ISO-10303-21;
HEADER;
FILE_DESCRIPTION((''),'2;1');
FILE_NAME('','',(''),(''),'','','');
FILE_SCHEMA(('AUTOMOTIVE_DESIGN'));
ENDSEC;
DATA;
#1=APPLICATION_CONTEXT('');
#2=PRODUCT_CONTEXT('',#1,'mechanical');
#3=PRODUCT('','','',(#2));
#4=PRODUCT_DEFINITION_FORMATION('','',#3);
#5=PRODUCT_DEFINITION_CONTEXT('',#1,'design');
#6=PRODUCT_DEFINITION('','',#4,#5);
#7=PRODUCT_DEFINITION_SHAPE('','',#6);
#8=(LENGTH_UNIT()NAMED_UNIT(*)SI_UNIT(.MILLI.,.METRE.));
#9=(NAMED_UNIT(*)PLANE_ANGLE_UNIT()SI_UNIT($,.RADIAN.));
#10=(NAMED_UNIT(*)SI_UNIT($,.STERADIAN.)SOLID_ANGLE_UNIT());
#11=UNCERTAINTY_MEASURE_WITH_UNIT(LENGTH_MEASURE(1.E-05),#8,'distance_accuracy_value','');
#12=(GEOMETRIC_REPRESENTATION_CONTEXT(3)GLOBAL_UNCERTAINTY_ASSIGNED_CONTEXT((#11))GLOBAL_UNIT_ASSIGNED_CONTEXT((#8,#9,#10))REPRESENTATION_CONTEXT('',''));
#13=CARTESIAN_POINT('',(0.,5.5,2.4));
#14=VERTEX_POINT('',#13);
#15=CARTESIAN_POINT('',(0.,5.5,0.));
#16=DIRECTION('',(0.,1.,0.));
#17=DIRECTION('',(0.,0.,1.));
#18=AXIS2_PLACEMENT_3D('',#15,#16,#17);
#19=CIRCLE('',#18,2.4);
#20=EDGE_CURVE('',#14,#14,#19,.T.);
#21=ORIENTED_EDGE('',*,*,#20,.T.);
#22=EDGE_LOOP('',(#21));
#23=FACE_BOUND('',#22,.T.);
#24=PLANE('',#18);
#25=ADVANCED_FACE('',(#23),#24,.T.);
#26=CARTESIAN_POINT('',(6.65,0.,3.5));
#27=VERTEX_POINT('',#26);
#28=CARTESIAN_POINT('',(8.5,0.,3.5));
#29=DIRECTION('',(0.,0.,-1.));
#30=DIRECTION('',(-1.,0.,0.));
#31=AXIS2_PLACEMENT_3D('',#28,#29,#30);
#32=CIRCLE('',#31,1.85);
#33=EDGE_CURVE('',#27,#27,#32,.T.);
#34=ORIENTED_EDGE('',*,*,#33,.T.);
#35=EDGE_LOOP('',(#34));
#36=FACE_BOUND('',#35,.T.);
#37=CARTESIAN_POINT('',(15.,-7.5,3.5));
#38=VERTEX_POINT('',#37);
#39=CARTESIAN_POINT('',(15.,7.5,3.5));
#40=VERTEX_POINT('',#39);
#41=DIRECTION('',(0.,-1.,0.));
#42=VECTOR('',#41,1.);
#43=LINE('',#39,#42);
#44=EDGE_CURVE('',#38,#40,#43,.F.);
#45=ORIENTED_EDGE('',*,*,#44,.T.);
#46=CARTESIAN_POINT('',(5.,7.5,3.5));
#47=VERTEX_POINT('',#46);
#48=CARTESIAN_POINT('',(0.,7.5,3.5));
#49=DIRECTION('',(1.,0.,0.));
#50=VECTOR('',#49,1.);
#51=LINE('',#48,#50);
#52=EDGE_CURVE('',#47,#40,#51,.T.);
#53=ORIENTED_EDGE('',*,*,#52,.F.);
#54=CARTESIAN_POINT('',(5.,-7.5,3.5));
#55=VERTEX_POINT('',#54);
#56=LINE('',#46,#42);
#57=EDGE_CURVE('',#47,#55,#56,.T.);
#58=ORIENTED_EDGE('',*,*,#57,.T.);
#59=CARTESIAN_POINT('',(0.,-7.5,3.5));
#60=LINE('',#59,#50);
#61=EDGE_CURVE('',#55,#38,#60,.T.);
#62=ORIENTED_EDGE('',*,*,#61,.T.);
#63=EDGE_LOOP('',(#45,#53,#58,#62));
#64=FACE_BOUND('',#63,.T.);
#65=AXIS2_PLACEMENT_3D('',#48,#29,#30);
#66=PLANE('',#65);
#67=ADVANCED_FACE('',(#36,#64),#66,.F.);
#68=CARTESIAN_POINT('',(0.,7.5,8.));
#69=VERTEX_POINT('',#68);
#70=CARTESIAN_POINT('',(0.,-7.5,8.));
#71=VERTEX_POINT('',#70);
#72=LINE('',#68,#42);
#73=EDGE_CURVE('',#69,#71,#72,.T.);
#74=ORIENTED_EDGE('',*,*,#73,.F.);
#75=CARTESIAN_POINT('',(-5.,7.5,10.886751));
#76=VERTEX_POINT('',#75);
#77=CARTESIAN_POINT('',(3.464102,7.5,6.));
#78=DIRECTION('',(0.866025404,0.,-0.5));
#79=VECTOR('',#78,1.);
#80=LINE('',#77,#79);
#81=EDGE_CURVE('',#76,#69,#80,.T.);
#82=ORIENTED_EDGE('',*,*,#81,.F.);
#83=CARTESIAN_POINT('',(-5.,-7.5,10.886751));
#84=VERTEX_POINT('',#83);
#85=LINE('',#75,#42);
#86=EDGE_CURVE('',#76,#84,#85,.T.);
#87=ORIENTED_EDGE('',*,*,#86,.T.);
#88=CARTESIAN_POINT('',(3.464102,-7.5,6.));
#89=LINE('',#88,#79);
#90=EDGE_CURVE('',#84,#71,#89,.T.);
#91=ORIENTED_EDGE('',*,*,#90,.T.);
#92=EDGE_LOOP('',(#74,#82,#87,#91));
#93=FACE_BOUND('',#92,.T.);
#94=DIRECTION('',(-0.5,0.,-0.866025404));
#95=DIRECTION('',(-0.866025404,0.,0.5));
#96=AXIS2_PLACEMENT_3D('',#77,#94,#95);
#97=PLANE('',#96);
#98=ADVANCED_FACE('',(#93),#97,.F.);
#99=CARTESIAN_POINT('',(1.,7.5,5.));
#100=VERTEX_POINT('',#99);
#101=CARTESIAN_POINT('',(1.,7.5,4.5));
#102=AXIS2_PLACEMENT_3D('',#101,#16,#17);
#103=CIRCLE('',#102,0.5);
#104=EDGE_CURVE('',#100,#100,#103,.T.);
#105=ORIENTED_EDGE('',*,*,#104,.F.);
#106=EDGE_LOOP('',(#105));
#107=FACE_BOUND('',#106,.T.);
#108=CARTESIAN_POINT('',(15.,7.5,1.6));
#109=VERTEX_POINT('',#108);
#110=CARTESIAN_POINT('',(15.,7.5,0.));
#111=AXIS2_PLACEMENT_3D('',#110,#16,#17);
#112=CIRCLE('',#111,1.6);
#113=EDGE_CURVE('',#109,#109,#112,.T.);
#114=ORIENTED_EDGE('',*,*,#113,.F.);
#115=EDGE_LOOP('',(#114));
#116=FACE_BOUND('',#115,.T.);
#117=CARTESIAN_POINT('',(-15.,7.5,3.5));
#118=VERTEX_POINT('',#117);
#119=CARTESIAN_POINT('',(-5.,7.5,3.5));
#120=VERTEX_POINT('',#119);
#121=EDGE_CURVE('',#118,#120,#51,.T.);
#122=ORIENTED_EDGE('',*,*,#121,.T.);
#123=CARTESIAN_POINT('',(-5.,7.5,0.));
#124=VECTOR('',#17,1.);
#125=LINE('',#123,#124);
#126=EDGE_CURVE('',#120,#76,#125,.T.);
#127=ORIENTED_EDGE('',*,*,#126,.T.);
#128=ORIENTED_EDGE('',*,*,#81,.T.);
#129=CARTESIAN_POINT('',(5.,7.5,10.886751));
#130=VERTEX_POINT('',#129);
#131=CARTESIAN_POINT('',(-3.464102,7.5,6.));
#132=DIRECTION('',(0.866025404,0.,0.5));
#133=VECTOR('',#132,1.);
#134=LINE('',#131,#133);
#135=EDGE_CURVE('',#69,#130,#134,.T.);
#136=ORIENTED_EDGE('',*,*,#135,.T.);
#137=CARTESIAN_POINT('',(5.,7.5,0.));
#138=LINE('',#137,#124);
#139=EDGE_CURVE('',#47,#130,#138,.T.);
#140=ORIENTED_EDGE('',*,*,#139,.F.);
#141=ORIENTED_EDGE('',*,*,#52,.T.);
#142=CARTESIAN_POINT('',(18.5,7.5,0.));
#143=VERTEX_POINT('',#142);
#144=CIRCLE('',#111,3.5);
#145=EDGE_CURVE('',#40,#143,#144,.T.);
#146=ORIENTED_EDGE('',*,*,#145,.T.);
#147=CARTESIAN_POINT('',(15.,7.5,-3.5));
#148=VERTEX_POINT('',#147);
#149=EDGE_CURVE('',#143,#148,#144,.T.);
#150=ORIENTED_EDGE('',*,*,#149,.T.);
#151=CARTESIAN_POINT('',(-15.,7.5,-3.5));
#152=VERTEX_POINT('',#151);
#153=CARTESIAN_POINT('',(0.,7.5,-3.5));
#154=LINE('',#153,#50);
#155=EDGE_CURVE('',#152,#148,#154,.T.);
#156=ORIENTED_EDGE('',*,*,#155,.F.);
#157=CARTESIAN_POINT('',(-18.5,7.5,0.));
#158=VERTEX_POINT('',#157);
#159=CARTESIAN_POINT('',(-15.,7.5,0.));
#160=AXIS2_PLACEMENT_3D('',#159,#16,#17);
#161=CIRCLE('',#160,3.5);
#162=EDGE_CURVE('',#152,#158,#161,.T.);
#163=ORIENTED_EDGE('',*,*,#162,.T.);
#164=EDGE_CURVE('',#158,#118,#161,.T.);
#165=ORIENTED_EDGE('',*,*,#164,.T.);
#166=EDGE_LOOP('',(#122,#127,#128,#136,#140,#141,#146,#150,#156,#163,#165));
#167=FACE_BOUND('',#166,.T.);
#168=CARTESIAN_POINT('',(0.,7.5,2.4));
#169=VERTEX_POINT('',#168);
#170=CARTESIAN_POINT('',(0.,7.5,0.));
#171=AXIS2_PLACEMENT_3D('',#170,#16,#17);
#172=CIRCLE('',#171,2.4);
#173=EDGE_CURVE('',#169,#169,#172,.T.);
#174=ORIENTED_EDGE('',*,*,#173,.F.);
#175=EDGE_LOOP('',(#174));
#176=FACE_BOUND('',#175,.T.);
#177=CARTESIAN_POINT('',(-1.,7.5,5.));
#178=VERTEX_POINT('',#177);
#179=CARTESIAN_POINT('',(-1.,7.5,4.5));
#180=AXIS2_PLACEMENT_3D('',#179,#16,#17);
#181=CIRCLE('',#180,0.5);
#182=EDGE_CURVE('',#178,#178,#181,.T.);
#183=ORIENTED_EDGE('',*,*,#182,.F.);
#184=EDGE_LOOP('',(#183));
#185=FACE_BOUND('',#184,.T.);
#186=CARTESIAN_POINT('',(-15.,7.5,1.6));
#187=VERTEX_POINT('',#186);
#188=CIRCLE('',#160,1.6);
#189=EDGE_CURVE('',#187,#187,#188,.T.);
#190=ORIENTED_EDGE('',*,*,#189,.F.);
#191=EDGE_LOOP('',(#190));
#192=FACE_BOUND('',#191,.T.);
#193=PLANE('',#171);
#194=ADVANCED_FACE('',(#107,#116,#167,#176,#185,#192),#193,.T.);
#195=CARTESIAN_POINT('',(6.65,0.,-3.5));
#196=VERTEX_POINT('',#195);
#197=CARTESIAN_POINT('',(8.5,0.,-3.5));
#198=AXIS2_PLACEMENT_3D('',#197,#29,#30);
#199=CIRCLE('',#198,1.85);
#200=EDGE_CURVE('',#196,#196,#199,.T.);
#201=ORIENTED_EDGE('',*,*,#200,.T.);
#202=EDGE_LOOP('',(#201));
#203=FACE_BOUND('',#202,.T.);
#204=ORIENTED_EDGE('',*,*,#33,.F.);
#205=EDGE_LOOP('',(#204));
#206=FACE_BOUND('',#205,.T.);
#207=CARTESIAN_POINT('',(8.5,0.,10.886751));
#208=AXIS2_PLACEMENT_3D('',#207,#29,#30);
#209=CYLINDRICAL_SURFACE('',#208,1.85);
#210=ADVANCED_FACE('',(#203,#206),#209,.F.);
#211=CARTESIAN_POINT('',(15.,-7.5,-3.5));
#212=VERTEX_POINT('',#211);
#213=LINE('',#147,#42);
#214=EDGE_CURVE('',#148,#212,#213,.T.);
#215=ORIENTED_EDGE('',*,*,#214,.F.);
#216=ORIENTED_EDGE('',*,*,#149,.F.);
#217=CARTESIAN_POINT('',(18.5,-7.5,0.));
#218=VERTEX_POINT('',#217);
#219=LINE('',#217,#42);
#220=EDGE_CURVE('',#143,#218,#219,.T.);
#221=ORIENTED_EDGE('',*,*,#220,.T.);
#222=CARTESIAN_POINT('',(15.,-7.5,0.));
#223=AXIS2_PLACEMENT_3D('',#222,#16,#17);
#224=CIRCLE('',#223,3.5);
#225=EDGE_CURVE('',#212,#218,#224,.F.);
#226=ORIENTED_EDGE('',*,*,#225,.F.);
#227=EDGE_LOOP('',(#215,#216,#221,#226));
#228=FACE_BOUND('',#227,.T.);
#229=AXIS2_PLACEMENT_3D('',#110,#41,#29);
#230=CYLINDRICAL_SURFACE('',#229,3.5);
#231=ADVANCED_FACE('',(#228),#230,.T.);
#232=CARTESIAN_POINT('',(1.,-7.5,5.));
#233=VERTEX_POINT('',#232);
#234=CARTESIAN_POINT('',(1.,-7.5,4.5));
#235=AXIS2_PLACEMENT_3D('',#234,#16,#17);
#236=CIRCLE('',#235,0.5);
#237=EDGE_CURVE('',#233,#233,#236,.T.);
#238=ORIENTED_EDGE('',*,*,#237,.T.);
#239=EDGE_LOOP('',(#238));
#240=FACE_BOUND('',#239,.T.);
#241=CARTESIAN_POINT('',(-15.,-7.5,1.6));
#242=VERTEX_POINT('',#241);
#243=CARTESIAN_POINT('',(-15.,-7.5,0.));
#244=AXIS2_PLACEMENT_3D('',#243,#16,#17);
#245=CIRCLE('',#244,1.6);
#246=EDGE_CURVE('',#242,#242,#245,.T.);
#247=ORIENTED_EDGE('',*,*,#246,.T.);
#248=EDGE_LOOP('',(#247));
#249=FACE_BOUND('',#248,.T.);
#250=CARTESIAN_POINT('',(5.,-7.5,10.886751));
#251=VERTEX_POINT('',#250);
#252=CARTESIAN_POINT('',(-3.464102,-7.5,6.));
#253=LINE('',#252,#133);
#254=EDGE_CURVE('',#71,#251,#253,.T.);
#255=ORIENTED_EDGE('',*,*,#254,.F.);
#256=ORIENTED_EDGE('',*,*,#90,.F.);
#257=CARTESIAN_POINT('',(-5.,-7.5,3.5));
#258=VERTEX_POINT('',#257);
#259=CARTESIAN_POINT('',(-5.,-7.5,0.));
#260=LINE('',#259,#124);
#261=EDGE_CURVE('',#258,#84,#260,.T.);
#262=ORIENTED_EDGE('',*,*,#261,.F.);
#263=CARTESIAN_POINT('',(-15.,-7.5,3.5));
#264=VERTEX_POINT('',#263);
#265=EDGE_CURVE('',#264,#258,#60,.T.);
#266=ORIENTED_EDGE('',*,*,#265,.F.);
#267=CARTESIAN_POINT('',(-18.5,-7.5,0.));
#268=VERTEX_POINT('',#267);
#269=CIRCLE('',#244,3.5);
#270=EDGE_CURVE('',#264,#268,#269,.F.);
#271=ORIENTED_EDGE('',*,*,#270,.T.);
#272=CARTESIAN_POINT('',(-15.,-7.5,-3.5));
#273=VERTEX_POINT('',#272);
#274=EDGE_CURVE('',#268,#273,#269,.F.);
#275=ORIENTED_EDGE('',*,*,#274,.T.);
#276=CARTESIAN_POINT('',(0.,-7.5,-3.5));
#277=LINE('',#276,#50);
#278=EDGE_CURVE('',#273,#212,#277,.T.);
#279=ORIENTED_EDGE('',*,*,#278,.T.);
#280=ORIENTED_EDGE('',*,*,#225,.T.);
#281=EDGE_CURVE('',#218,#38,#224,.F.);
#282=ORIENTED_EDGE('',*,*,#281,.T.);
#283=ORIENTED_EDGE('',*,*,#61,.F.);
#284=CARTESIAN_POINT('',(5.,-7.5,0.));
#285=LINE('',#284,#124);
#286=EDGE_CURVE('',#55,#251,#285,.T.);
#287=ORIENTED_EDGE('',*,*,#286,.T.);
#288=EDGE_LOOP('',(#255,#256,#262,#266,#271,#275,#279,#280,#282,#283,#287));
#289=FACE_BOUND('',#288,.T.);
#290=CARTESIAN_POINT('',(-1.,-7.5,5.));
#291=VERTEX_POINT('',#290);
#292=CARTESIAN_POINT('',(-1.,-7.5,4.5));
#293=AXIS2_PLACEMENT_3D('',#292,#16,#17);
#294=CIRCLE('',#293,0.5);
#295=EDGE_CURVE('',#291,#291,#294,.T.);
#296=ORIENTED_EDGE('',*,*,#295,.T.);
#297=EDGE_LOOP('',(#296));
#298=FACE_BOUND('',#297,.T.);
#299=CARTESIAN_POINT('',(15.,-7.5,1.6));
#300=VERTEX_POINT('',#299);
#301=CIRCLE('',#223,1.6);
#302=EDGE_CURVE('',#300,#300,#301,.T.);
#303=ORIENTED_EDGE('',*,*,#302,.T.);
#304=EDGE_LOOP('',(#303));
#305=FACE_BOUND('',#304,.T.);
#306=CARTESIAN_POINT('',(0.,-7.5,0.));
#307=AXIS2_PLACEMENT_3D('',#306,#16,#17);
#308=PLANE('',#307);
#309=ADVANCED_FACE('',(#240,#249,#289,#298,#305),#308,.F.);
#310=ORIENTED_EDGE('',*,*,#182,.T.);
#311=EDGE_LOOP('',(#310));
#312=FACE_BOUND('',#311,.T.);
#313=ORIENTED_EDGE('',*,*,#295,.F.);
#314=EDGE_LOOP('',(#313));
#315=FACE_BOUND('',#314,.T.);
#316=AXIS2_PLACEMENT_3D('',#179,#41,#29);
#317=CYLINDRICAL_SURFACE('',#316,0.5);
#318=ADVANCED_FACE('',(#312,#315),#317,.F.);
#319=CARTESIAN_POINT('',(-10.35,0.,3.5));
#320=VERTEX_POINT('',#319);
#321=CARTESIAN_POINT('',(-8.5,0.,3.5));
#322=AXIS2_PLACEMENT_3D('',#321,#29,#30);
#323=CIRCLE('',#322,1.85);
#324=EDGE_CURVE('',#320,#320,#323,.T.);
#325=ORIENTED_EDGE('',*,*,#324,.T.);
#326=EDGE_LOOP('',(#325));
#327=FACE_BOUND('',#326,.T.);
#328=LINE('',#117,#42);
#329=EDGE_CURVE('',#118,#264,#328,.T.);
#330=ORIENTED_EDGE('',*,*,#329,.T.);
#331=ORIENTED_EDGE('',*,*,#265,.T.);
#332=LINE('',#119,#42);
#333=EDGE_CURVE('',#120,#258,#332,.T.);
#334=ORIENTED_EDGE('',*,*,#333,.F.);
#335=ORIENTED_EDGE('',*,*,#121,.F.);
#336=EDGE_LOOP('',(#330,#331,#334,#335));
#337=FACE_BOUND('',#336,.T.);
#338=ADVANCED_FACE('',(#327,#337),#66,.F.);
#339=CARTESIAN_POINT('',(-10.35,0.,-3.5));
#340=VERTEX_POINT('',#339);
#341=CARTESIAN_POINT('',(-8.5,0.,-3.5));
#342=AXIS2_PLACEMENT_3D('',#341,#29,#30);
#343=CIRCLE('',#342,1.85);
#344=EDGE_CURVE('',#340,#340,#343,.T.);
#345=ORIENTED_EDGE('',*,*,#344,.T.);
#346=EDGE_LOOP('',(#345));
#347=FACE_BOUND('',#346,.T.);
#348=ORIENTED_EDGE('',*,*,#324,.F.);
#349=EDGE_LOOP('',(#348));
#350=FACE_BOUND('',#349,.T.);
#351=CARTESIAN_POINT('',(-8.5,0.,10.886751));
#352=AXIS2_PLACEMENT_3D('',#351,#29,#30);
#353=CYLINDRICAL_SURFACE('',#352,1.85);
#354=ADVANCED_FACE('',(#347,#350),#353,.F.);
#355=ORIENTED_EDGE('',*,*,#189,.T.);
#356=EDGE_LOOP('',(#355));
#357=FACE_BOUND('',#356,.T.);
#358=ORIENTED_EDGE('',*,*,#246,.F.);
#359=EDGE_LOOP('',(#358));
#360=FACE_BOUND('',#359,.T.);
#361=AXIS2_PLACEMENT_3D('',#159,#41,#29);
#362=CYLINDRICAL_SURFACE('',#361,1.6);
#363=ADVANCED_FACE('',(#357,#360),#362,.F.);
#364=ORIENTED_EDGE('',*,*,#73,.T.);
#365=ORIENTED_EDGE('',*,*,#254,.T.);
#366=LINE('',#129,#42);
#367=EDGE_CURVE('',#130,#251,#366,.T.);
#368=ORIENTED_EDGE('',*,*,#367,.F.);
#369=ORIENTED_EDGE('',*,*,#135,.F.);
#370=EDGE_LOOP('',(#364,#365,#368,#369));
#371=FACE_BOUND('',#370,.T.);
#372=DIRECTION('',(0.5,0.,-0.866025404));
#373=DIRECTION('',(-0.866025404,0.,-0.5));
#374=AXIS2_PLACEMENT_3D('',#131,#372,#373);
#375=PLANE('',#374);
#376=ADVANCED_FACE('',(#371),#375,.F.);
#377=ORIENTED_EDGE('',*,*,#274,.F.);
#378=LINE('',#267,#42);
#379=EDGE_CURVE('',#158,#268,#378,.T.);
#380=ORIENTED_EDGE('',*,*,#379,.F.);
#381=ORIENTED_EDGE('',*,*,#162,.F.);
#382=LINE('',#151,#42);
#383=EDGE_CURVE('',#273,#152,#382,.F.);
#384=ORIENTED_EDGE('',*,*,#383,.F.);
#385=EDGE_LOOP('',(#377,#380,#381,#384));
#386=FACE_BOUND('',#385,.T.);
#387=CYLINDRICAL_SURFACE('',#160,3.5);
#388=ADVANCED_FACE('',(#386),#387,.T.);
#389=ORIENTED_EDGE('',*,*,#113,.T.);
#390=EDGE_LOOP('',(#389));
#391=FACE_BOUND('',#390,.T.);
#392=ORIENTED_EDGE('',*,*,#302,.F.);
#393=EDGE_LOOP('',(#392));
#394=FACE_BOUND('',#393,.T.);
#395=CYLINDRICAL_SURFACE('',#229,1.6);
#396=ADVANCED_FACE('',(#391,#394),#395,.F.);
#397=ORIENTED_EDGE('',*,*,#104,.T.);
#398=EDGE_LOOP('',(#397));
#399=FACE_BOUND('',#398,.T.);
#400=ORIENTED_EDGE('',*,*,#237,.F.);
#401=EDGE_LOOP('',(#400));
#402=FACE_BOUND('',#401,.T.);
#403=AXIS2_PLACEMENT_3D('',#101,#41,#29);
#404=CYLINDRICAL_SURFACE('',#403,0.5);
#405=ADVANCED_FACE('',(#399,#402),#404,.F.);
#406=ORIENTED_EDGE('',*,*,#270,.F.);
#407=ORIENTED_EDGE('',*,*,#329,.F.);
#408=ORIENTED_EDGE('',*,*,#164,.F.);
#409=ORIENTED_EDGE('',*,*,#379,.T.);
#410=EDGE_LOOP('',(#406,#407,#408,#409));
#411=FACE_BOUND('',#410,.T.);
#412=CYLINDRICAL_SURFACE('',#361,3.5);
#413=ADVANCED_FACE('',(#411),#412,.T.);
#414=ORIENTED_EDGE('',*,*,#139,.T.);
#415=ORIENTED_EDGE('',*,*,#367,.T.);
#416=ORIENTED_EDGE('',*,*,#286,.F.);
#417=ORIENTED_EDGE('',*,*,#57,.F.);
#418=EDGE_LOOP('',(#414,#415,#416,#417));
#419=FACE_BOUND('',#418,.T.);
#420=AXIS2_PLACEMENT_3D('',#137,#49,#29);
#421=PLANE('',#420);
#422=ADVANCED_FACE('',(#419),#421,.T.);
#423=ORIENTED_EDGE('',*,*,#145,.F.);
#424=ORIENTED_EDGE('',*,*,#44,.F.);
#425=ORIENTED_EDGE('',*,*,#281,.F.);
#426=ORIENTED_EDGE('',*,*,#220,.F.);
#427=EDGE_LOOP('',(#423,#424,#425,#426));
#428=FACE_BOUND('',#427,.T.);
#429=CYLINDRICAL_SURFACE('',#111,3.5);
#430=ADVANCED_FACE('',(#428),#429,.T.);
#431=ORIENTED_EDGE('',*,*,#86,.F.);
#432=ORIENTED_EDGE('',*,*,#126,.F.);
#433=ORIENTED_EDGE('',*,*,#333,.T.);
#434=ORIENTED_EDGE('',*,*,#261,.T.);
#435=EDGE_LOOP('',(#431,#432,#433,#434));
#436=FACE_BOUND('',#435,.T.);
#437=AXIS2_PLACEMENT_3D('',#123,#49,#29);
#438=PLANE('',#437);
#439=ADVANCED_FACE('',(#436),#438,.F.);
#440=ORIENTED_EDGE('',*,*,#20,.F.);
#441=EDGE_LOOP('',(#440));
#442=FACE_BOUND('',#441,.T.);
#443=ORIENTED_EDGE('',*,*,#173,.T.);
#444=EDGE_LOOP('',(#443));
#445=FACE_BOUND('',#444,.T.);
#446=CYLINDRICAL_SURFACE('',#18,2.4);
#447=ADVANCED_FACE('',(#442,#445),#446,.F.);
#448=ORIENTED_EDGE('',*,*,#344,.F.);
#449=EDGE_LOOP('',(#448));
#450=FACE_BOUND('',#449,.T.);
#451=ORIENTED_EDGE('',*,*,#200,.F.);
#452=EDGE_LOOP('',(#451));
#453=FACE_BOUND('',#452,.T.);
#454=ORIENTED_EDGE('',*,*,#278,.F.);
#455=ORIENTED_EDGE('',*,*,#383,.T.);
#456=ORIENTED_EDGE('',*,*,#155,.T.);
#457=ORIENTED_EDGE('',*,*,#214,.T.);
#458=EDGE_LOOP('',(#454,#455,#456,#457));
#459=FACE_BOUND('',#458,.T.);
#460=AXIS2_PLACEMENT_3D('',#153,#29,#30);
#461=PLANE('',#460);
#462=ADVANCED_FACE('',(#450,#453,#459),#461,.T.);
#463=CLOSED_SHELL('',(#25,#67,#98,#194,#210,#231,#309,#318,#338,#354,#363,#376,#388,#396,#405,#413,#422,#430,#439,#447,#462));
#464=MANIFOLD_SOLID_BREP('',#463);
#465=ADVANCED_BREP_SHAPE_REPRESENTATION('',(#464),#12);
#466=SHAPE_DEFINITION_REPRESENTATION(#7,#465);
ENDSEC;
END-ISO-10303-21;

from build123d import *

# Parameters (mm, degrees)
SKIZZE1_W                       = 37
SKIZZE1_H                       = 7
SKIZZE1_R                       = 2.4
SKIZZE1_R_2                     = 1.6
SKIZZE1_R_3                     = 0.5
AUFSATZ_LINEAR_AUSTRAGEN1_DEPTH = 7.5
VERRUNDUNG1_R                   = 3.5
SKIZZE2_R                       = 1.85
SCHNITT_LINEAR_AUSTRAGEN1_DEPTH = 25.606475048
SKIZZE3_R                       = 2.4
SCHNITT_LINEAR_AUSTRAGEN2_DEPTH = 2


with BuildPart() as part:
    # Skizze1 → Aufsatz-Linear austragen1 (new, symmetric)
    # profile 1 of 3: a face of its own
    with BuildSketch(Plane(origin=(0, 0, 0), x_dir=(1, 0, 0), z_dir=(0, 1, 0))):
        Rectangle(SKIZZE1_W, SKIZZE1_H)
        Circle(SKIZZE1_R, mode=Mode.SUBTRACT)
        with Locations(Location((15, 0, 0), (0, 0, 270))):
            Circle(SKIZZE1_R_2, mode=Mode.SUBTRACT)
        with Locations(Location((-15, 0, 0), (0, 0, 270))):
            Circle(SKIZZE1_R_2, mode=Mode.SUBTRACT)
    # profile 2 of 3: a face of its own
    with BuildSketch(Plane(origin=(0, 0, 0), x_dir=(1, 0, 0), z_dir=(0, 1, 0))):
        Circle(SKIZZE1_R)
    # profile 3 of 3: a face of its own
    with BuildSketch(Plane(origin=(0, 0, 0), x_dir=(1, 0, 0), z_dir=(0, 1, 0))):
        Polygon((5, -3.5), (-5, -3.5), (-5, -10.886751346), (0, -8), (5, -10.886751346), align=None)
        with Locations(Location((-1, -4.5, 0), (0, 0, 270))):
            Circle(SKIZZE1_R_3, mode=Mode.SUBTRACT)
        with Locations(Location((1, -4.5, 0), (0, 0, 270))):
            Circle(SKIZZE1_R_3, mode=Mode.SUBTRACT)
    extrude(amount=AUFSATZ_LINEAR_AUSTRAGEN1_DEPTH, both=True)

    # Verrundung1
    verrundung1_edges = [part.edges().sort_by_distance(p)[0] for p in [
        (-18.5, 0, 3.5),
        (-18.5, 0, -3.5),
        (18.5, 0, -3.5),
        (18.5, 0, 3.5),
    ]]
    fillet(verrundung1_edges, radius=VERRUNDUNG1_R - 0.0001)  # a hair under: the kernel refuses the full size

    # Skizze2 → Schnitt-Linear austragen1 (cut, through all)
    with BuildSketch(Plane(origin=(0, 0, -3.5), x_dir=(-1, 0, 0), z_dir=(0, 0, -1))):
        with Locations((-8.5, 0)):
            Circle(SKIZZE2_R)
        with Locations((8.5, 0)):
            Circle(SKIZZE2_R)
    extrude(amount=-SCHNITT_LINEAR_AUSTRAGEN1_DEPTH, mode=Mode.SUBTRACT)

    # Skizze3 → Schnitt-Linear austragen2 (cut)
    with BuildSketch(Plane(origin=(0, 7.5, 0), x_dir=(1, 0, 0), z_dir=(0, 1, 0))):
        with Locations(Location((0, 0, 0), (0, 0, 270))):
            Circle(SKIZZE3_R)
    extrude(amount=-SCHNITT_LINEAR_AUSTRAGEN2_DEPTH, mode=Mode.SUBTRACT)


solid = part.part
